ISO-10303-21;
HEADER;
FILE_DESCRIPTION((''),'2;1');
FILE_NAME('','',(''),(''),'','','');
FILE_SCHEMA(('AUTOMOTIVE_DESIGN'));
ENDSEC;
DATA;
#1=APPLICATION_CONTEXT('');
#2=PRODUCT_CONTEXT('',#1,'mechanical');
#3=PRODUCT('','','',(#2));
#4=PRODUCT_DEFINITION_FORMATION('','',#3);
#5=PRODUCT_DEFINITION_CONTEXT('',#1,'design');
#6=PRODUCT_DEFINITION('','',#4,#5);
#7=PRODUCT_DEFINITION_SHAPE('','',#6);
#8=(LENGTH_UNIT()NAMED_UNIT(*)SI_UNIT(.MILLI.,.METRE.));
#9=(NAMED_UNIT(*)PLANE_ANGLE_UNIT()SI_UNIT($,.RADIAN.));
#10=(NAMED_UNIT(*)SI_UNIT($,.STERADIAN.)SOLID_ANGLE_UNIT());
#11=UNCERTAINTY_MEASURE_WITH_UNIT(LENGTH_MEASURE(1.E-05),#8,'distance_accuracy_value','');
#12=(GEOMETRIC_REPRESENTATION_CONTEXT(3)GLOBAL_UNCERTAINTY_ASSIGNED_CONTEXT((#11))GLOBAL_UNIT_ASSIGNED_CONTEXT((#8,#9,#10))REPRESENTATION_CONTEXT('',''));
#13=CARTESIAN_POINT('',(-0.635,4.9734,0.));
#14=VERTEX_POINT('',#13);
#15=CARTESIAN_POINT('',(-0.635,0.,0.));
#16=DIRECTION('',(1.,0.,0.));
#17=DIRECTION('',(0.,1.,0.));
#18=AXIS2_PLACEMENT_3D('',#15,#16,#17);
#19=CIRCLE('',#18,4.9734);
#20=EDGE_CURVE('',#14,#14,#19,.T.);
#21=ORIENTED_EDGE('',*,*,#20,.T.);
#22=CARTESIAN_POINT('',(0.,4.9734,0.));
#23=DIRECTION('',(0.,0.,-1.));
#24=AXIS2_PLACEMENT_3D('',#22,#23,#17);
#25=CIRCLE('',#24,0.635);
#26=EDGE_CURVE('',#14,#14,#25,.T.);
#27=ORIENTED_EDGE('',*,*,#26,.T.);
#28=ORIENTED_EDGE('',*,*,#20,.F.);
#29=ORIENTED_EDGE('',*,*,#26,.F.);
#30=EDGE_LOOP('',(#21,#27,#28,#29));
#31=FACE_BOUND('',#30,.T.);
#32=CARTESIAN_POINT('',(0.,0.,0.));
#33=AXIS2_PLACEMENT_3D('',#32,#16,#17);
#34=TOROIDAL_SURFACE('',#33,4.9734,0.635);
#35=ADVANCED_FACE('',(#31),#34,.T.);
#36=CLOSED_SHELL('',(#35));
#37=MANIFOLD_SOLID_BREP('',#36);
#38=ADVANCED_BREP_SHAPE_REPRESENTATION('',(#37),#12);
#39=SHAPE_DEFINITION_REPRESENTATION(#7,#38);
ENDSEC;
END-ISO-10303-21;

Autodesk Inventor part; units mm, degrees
ref_plane "YZ Plane" through (0, 0, 0) normal (1, 0, 0) x (0, 1, 0)
ref_plane "XZ Plane" through (0, 0, 0) normal (0, 1, 0) x (-1, 0, 0)
ref_plane "XY Plane" through (0, 0, 0) normal (0, 0, 1) x (1, 0, 0)
sketch "Sketch1" plane through (0, 0, 0) normal (1, 0, 0) x (0, 1, 0)
  circle A0 centre (0, 0) radius 6.35
  dimension "d0" = 12.7
sketch "Sketch2" plane through (0, 0, 0) normal (0, 1, 0) x (-1, 0, 0)
  circle A0 centre (0, 4.9734) radius 0.635
  point P0 (0, 0)
  dimension "d1" = 1.27
sweep "Sweep1" add profiles "Sketch2" path "Sketch1"
properties part number "o ring"
